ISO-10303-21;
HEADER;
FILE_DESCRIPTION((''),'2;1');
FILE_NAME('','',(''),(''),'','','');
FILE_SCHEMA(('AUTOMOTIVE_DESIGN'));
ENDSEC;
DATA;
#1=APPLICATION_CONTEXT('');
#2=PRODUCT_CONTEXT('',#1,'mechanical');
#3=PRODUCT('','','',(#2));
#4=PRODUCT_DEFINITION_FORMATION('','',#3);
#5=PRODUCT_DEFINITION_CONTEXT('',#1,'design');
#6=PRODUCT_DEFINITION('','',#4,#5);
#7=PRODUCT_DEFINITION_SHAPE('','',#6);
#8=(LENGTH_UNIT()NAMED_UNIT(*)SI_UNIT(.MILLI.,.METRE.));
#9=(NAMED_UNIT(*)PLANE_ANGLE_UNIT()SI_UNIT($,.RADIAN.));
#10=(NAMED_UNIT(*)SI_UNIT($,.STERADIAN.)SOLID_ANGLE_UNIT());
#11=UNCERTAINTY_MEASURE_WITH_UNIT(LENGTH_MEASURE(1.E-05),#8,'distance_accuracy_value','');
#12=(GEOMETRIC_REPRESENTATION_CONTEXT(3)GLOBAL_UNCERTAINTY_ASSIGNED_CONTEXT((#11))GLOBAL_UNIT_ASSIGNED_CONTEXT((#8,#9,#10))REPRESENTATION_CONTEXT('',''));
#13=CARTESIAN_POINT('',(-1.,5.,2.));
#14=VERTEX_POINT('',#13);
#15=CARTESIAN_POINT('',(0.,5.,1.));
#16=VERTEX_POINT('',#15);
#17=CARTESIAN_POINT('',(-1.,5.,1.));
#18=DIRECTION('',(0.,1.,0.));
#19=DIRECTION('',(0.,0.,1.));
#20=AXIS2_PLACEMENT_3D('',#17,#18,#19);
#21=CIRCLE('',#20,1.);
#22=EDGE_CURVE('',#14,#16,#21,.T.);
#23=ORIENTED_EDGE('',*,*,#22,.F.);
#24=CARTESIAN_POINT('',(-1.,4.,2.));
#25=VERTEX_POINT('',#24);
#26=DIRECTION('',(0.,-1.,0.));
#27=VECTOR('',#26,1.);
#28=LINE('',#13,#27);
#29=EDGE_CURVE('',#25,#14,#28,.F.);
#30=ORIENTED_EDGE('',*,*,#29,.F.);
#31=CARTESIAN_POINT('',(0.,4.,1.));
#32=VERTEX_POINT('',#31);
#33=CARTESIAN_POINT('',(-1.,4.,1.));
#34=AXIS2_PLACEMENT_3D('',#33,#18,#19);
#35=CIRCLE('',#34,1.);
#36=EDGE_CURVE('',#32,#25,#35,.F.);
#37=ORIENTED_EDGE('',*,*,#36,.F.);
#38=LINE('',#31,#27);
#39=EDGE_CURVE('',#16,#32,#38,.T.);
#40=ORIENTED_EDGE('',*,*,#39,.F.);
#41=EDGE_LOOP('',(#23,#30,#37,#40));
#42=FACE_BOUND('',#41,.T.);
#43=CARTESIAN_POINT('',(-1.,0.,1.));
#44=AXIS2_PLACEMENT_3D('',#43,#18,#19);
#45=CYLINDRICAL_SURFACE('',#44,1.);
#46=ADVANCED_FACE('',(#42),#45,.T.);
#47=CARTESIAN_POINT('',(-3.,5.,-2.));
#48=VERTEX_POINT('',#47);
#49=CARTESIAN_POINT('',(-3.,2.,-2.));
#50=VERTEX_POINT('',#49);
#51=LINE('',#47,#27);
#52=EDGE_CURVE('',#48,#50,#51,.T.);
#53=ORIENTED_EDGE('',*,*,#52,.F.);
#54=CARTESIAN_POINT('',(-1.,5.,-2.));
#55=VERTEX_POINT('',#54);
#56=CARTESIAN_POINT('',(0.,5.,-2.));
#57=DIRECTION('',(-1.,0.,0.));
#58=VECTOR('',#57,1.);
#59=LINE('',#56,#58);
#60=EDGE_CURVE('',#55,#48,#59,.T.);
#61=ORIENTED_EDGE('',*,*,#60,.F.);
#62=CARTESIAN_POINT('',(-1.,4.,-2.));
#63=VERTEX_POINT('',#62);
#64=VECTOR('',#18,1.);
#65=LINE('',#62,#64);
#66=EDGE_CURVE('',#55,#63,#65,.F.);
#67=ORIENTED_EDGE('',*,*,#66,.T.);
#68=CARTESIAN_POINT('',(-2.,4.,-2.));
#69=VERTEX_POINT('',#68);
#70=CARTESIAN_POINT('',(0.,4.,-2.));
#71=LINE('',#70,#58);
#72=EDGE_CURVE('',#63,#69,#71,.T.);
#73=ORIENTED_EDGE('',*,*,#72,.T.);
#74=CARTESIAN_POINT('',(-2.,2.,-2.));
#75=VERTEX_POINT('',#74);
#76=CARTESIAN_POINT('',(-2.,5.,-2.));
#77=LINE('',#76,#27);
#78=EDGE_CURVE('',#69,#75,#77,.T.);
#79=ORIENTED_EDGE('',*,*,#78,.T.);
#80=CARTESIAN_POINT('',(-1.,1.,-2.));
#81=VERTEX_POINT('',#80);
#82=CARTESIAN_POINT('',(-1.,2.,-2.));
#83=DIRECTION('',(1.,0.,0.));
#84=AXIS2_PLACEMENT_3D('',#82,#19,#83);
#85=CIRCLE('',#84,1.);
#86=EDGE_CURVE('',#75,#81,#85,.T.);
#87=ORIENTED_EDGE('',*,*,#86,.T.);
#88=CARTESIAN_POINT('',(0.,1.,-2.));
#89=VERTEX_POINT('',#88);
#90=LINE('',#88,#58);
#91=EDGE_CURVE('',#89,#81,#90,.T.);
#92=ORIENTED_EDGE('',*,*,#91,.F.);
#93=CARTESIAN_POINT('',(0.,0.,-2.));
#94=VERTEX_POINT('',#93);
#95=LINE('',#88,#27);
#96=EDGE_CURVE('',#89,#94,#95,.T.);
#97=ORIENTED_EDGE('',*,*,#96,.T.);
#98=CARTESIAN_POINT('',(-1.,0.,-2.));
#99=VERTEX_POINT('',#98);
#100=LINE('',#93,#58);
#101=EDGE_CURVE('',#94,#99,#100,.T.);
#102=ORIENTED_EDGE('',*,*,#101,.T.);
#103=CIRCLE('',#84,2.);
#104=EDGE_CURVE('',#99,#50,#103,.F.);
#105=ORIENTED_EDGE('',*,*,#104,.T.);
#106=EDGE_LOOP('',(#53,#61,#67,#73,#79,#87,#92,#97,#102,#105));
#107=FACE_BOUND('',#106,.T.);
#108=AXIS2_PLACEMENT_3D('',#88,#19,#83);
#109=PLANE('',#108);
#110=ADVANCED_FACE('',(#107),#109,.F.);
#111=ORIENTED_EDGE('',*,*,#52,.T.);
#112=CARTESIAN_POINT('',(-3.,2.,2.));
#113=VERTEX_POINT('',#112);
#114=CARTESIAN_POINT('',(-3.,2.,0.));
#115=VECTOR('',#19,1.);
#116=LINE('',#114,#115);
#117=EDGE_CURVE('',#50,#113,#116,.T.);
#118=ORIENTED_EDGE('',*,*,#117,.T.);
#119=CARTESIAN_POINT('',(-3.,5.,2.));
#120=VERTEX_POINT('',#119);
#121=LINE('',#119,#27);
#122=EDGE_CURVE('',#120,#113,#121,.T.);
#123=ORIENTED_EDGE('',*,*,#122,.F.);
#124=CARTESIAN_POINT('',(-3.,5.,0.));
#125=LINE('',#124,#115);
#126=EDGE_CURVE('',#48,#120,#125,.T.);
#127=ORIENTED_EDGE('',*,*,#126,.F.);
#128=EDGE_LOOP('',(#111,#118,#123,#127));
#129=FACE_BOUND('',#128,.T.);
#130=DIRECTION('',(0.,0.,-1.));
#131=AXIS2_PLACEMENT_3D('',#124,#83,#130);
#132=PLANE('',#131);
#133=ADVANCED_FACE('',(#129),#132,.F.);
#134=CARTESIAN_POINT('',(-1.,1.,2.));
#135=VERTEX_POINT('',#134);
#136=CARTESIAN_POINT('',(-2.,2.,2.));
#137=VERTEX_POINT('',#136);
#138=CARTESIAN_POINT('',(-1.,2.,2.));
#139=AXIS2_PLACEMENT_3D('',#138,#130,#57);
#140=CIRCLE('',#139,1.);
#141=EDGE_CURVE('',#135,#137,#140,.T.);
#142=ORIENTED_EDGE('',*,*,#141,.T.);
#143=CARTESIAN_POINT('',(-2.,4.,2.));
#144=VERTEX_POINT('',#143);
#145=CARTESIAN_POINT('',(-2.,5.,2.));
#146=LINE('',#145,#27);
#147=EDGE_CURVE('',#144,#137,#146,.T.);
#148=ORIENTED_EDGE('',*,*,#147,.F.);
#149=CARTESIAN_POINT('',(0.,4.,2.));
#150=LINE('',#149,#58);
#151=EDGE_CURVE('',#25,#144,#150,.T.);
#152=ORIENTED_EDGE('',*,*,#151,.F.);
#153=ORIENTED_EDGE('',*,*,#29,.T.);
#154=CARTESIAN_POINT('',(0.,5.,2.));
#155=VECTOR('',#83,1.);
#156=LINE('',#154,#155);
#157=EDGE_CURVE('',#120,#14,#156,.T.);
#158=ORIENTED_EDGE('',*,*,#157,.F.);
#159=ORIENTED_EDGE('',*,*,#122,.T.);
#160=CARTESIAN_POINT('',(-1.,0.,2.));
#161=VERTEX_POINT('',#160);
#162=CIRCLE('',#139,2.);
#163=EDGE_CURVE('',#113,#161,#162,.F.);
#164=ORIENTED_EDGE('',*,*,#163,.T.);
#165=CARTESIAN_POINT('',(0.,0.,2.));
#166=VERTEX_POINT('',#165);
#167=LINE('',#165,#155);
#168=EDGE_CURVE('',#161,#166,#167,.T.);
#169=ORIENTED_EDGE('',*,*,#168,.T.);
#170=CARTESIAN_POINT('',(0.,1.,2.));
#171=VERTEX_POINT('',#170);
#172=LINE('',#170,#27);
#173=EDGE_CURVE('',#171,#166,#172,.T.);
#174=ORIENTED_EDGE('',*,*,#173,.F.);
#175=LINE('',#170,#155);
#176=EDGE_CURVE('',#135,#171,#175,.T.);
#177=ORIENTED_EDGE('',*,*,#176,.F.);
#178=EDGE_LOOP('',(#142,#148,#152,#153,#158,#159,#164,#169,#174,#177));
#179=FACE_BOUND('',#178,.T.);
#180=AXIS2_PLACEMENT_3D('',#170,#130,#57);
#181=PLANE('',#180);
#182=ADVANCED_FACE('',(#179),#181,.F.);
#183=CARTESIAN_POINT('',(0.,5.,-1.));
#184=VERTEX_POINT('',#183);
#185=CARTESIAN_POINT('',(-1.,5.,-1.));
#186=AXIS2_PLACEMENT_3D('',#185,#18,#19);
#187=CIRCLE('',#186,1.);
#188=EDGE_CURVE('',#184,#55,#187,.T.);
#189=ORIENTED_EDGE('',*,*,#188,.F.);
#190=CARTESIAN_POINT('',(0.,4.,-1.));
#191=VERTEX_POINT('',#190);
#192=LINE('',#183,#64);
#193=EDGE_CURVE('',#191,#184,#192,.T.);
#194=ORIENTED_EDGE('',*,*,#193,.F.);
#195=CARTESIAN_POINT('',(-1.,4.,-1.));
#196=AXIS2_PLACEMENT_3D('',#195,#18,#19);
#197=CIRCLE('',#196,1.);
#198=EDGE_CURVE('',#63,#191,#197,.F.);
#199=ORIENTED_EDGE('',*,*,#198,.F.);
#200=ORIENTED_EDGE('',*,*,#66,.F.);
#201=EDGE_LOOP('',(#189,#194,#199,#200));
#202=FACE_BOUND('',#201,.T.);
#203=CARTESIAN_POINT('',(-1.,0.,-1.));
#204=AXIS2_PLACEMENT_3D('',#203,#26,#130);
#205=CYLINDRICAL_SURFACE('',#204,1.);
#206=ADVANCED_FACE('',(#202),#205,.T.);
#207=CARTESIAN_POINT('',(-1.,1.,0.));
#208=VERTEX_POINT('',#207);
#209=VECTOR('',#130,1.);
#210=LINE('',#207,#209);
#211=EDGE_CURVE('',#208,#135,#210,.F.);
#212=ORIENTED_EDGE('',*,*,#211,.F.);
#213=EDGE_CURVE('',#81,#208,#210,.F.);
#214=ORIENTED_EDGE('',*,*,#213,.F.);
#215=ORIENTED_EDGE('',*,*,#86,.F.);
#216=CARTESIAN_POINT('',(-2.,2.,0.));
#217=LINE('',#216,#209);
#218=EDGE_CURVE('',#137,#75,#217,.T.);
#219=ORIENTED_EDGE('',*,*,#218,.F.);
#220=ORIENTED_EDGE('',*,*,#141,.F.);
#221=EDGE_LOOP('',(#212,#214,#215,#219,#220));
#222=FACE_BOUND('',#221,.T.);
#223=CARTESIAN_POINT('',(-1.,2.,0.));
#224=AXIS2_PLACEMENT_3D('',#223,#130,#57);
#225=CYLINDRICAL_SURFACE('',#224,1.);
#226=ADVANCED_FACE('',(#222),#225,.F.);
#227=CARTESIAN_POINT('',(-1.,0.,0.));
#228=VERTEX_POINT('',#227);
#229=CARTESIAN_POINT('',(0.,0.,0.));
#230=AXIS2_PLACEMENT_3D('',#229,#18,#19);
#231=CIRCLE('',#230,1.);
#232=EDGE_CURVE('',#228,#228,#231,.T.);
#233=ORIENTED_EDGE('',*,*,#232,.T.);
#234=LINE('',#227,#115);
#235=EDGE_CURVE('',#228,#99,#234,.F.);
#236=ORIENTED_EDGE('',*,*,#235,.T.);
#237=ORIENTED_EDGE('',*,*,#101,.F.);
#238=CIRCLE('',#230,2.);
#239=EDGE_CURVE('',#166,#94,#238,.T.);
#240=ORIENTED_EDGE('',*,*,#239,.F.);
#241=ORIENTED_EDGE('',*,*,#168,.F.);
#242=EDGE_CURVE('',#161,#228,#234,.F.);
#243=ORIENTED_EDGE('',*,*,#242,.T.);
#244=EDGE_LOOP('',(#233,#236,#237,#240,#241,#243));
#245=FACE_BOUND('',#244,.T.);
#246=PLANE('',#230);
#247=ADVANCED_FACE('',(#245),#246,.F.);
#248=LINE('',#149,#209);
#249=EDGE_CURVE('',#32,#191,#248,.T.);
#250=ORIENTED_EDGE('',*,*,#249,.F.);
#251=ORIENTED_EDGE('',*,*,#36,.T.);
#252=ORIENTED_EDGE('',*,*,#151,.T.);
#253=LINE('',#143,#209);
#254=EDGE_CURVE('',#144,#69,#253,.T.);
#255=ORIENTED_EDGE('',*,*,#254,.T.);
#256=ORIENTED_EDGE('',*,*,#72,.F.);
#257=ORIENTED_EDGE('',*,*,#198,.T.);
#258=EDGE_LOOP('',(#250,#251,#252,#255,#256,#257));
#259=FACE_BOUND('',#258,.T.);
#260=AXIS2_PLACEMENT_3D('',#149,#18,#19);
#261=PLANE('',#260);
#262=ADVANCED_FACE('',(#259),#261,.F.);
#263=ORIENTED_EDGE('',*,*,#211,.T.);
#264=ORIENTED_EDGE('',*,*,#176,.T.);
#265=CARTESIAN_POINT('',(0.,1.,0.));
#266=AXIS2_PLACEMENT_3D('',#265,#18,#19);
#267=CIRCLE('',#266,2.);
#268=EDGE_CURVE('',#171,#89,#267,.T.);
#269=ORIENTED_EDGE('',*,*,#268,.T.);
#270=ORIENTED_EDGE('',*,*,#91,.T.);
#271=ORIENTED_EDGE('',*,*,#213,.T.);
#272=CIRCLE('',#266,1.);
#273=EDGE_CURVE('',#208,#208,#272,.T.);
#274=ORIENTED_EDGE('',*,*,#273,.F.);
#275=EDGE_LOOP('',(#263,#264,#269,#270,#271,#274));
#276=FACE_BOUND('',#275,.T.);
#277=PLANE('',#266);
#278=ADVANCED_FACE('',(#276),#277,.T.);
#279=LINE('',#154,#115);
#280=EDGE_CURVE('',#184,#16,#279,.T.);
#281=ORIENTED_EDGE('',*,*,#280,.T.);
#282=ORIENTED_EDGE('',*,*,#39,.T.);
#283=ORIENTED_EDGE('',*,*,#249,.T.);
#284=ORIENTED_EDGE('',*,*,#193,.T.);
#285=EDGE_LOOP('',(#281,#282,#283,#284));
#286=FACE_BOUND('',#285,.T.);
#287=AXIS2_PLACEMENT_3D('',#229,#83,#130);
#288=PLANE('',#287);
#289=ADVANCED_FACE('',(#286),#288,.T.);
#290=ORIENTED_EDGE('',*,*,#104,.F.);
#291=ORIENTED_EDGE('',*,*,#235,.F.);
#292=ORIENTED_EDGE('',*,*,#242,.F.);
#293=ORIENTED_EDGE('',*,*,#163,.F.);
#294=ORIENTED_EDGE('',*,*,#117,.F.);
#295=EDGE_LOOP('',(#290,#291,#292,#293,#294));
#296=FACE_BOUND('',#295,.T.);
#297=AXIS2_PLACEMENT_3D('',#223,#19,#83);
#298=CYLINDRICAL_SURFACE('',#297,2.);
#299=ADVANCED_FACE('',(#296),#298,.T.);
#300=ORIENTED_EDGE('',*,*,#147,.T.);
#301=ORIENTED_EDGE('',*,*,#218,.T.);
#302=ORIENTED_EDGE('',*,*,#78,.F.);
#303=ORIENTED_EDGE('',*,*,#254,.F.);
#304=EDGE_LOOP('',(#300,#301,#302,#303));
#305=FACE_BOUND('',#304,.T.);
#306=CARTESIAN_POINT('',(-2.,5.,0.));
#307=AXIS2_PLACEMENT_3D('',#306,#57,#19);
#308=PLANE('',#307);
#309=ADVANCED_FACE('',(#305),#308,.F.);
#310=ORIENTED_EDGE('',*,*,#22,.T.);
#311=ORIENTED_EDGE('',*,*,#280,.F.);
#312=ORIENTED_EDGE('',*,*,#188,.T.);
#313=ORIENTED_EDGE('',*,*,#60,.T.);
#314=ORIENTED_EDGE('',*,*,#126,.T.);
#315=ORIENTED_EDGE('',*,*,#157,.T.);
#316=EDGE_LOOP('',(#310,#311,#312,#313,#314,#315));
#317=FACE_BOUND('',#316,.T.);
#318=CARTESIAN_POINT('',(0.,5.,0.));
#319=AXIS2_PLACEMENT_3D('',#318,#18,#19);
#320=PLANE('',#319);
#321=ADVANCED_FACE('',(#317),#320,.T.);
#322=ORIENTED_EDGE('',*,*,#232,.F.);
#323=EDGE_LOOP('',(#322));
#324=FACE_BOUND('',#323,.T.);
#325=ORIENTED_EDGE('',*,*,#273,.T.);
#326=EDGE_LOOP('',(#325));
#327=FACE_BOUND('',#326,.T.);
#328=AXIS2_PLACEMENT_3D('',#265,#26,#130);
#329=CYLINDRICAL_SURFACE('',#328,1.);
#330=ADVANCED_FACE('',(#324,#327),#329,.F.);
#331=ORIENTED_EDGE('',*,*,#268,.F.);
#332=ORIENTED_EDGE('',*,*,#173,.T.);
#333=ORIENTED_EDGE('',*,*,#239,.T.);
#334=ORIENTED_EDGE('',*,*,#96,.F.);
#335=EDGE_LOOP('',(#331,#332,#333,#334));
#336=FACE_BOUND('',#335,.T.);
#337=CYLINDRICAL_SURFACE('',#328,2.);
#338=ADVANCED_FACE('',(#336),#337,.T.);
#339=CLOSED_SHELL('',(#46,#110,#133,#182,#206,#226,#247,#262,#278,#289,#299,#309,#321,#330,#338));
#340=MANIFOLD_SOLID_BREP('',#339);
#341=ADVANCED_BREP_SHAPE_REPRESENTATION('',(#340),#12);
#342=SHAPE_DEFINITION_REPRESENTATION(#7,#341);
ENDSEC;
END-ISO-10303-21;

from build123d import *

# Parameters (mm, degrees)
SKETCH_1_R      = 1
EXTRUDE_1_DEPTH = 1
SKETCH_1_3_W    = 1
SKETCH_1_3_H    = 4
EXTRUDE_2_DEPTH = 5
SKETCH_2_W      = 4
SKETCH_2_H      = 1
EXTRUDE_3_DEPTH = 2
FILLET_1_R      = 1
FILLET_2_R      = 2
FILLET_3_R      = 1


with BuildPart() as part:
    # 草圖1 → 填料-伸長1 (new body)
    with BuildSketch(Plane(origin=(0, 0, 0), x_dir=(1, 0, 0), z_dir=(0, 1, 0))):
        with BuildLine():
            ThreePointArc((0, -2), (2, 0), (0, 2))
            Line((0, 2), (-2, 2))
            Line((-2, 2), (-2, -2))
            Line((-2, -2), (0, -2))
        make_face()
        with Locations(Location((0, 0, 0), (0, 0, 270))):
            Circle(SKETCH_1_R, mode=Mode.SUBTRACT)
    extrude(amount=EXTRUDE_1_DEPTH)

    # 草圖1<3> → 填料-伸長2 (add)
    with BuildSketch(Plane(origin=(0, 0, 0), x_dir=(1, 0, 0), z_dir=(0, 1, 0))):
        with Locations((-2.5, 0)):
            Rectangle(SKETCH_1_3_W, SKETCH_1_3_H)
    extrude(amount=EXTRUDE_2_DEPTH)

    # 草圖2 → 填料-伸長3 (add)
    with BuildSketch(Plane(origin=(-2, 0, 0), x_dir=(0, 0, -1), z_dir=(1, 0, 0))):
        with Locations((0, 4.5)):
            Rectangle(SKETCH_2_W, SKETCH_2_H)
    extrude(amount=EXTRUDE_3_DEPTH)

    # 圓角1
    fillet_1_edges = [part.edges().sort_by_distance(p)[0] for p in [
        (0, 4.5, 2),
        (0, 4.5, -2),
    ]]
    fillet(fillet_1_edges, radius=FILLET_1_R)

    # 圓角2
    fillet_2_edges = [part.edges().sort_by_distance(p)[0] for p in [
        (-3, 0, 0),
    ]]
    fillet(fillet_2_edges, radius=FILLET_2_R)

    # 圓角3
    fillet_3_edges = [part.edges().sort_by_distance(p)[0] for p in [
        (-2, 1, 0),
    ]]
    fillet(fillet_3_edges, radius=FILLET_3_R - 0.0001)  # a hair under: the kernel refuses the full size


solid = part.part
